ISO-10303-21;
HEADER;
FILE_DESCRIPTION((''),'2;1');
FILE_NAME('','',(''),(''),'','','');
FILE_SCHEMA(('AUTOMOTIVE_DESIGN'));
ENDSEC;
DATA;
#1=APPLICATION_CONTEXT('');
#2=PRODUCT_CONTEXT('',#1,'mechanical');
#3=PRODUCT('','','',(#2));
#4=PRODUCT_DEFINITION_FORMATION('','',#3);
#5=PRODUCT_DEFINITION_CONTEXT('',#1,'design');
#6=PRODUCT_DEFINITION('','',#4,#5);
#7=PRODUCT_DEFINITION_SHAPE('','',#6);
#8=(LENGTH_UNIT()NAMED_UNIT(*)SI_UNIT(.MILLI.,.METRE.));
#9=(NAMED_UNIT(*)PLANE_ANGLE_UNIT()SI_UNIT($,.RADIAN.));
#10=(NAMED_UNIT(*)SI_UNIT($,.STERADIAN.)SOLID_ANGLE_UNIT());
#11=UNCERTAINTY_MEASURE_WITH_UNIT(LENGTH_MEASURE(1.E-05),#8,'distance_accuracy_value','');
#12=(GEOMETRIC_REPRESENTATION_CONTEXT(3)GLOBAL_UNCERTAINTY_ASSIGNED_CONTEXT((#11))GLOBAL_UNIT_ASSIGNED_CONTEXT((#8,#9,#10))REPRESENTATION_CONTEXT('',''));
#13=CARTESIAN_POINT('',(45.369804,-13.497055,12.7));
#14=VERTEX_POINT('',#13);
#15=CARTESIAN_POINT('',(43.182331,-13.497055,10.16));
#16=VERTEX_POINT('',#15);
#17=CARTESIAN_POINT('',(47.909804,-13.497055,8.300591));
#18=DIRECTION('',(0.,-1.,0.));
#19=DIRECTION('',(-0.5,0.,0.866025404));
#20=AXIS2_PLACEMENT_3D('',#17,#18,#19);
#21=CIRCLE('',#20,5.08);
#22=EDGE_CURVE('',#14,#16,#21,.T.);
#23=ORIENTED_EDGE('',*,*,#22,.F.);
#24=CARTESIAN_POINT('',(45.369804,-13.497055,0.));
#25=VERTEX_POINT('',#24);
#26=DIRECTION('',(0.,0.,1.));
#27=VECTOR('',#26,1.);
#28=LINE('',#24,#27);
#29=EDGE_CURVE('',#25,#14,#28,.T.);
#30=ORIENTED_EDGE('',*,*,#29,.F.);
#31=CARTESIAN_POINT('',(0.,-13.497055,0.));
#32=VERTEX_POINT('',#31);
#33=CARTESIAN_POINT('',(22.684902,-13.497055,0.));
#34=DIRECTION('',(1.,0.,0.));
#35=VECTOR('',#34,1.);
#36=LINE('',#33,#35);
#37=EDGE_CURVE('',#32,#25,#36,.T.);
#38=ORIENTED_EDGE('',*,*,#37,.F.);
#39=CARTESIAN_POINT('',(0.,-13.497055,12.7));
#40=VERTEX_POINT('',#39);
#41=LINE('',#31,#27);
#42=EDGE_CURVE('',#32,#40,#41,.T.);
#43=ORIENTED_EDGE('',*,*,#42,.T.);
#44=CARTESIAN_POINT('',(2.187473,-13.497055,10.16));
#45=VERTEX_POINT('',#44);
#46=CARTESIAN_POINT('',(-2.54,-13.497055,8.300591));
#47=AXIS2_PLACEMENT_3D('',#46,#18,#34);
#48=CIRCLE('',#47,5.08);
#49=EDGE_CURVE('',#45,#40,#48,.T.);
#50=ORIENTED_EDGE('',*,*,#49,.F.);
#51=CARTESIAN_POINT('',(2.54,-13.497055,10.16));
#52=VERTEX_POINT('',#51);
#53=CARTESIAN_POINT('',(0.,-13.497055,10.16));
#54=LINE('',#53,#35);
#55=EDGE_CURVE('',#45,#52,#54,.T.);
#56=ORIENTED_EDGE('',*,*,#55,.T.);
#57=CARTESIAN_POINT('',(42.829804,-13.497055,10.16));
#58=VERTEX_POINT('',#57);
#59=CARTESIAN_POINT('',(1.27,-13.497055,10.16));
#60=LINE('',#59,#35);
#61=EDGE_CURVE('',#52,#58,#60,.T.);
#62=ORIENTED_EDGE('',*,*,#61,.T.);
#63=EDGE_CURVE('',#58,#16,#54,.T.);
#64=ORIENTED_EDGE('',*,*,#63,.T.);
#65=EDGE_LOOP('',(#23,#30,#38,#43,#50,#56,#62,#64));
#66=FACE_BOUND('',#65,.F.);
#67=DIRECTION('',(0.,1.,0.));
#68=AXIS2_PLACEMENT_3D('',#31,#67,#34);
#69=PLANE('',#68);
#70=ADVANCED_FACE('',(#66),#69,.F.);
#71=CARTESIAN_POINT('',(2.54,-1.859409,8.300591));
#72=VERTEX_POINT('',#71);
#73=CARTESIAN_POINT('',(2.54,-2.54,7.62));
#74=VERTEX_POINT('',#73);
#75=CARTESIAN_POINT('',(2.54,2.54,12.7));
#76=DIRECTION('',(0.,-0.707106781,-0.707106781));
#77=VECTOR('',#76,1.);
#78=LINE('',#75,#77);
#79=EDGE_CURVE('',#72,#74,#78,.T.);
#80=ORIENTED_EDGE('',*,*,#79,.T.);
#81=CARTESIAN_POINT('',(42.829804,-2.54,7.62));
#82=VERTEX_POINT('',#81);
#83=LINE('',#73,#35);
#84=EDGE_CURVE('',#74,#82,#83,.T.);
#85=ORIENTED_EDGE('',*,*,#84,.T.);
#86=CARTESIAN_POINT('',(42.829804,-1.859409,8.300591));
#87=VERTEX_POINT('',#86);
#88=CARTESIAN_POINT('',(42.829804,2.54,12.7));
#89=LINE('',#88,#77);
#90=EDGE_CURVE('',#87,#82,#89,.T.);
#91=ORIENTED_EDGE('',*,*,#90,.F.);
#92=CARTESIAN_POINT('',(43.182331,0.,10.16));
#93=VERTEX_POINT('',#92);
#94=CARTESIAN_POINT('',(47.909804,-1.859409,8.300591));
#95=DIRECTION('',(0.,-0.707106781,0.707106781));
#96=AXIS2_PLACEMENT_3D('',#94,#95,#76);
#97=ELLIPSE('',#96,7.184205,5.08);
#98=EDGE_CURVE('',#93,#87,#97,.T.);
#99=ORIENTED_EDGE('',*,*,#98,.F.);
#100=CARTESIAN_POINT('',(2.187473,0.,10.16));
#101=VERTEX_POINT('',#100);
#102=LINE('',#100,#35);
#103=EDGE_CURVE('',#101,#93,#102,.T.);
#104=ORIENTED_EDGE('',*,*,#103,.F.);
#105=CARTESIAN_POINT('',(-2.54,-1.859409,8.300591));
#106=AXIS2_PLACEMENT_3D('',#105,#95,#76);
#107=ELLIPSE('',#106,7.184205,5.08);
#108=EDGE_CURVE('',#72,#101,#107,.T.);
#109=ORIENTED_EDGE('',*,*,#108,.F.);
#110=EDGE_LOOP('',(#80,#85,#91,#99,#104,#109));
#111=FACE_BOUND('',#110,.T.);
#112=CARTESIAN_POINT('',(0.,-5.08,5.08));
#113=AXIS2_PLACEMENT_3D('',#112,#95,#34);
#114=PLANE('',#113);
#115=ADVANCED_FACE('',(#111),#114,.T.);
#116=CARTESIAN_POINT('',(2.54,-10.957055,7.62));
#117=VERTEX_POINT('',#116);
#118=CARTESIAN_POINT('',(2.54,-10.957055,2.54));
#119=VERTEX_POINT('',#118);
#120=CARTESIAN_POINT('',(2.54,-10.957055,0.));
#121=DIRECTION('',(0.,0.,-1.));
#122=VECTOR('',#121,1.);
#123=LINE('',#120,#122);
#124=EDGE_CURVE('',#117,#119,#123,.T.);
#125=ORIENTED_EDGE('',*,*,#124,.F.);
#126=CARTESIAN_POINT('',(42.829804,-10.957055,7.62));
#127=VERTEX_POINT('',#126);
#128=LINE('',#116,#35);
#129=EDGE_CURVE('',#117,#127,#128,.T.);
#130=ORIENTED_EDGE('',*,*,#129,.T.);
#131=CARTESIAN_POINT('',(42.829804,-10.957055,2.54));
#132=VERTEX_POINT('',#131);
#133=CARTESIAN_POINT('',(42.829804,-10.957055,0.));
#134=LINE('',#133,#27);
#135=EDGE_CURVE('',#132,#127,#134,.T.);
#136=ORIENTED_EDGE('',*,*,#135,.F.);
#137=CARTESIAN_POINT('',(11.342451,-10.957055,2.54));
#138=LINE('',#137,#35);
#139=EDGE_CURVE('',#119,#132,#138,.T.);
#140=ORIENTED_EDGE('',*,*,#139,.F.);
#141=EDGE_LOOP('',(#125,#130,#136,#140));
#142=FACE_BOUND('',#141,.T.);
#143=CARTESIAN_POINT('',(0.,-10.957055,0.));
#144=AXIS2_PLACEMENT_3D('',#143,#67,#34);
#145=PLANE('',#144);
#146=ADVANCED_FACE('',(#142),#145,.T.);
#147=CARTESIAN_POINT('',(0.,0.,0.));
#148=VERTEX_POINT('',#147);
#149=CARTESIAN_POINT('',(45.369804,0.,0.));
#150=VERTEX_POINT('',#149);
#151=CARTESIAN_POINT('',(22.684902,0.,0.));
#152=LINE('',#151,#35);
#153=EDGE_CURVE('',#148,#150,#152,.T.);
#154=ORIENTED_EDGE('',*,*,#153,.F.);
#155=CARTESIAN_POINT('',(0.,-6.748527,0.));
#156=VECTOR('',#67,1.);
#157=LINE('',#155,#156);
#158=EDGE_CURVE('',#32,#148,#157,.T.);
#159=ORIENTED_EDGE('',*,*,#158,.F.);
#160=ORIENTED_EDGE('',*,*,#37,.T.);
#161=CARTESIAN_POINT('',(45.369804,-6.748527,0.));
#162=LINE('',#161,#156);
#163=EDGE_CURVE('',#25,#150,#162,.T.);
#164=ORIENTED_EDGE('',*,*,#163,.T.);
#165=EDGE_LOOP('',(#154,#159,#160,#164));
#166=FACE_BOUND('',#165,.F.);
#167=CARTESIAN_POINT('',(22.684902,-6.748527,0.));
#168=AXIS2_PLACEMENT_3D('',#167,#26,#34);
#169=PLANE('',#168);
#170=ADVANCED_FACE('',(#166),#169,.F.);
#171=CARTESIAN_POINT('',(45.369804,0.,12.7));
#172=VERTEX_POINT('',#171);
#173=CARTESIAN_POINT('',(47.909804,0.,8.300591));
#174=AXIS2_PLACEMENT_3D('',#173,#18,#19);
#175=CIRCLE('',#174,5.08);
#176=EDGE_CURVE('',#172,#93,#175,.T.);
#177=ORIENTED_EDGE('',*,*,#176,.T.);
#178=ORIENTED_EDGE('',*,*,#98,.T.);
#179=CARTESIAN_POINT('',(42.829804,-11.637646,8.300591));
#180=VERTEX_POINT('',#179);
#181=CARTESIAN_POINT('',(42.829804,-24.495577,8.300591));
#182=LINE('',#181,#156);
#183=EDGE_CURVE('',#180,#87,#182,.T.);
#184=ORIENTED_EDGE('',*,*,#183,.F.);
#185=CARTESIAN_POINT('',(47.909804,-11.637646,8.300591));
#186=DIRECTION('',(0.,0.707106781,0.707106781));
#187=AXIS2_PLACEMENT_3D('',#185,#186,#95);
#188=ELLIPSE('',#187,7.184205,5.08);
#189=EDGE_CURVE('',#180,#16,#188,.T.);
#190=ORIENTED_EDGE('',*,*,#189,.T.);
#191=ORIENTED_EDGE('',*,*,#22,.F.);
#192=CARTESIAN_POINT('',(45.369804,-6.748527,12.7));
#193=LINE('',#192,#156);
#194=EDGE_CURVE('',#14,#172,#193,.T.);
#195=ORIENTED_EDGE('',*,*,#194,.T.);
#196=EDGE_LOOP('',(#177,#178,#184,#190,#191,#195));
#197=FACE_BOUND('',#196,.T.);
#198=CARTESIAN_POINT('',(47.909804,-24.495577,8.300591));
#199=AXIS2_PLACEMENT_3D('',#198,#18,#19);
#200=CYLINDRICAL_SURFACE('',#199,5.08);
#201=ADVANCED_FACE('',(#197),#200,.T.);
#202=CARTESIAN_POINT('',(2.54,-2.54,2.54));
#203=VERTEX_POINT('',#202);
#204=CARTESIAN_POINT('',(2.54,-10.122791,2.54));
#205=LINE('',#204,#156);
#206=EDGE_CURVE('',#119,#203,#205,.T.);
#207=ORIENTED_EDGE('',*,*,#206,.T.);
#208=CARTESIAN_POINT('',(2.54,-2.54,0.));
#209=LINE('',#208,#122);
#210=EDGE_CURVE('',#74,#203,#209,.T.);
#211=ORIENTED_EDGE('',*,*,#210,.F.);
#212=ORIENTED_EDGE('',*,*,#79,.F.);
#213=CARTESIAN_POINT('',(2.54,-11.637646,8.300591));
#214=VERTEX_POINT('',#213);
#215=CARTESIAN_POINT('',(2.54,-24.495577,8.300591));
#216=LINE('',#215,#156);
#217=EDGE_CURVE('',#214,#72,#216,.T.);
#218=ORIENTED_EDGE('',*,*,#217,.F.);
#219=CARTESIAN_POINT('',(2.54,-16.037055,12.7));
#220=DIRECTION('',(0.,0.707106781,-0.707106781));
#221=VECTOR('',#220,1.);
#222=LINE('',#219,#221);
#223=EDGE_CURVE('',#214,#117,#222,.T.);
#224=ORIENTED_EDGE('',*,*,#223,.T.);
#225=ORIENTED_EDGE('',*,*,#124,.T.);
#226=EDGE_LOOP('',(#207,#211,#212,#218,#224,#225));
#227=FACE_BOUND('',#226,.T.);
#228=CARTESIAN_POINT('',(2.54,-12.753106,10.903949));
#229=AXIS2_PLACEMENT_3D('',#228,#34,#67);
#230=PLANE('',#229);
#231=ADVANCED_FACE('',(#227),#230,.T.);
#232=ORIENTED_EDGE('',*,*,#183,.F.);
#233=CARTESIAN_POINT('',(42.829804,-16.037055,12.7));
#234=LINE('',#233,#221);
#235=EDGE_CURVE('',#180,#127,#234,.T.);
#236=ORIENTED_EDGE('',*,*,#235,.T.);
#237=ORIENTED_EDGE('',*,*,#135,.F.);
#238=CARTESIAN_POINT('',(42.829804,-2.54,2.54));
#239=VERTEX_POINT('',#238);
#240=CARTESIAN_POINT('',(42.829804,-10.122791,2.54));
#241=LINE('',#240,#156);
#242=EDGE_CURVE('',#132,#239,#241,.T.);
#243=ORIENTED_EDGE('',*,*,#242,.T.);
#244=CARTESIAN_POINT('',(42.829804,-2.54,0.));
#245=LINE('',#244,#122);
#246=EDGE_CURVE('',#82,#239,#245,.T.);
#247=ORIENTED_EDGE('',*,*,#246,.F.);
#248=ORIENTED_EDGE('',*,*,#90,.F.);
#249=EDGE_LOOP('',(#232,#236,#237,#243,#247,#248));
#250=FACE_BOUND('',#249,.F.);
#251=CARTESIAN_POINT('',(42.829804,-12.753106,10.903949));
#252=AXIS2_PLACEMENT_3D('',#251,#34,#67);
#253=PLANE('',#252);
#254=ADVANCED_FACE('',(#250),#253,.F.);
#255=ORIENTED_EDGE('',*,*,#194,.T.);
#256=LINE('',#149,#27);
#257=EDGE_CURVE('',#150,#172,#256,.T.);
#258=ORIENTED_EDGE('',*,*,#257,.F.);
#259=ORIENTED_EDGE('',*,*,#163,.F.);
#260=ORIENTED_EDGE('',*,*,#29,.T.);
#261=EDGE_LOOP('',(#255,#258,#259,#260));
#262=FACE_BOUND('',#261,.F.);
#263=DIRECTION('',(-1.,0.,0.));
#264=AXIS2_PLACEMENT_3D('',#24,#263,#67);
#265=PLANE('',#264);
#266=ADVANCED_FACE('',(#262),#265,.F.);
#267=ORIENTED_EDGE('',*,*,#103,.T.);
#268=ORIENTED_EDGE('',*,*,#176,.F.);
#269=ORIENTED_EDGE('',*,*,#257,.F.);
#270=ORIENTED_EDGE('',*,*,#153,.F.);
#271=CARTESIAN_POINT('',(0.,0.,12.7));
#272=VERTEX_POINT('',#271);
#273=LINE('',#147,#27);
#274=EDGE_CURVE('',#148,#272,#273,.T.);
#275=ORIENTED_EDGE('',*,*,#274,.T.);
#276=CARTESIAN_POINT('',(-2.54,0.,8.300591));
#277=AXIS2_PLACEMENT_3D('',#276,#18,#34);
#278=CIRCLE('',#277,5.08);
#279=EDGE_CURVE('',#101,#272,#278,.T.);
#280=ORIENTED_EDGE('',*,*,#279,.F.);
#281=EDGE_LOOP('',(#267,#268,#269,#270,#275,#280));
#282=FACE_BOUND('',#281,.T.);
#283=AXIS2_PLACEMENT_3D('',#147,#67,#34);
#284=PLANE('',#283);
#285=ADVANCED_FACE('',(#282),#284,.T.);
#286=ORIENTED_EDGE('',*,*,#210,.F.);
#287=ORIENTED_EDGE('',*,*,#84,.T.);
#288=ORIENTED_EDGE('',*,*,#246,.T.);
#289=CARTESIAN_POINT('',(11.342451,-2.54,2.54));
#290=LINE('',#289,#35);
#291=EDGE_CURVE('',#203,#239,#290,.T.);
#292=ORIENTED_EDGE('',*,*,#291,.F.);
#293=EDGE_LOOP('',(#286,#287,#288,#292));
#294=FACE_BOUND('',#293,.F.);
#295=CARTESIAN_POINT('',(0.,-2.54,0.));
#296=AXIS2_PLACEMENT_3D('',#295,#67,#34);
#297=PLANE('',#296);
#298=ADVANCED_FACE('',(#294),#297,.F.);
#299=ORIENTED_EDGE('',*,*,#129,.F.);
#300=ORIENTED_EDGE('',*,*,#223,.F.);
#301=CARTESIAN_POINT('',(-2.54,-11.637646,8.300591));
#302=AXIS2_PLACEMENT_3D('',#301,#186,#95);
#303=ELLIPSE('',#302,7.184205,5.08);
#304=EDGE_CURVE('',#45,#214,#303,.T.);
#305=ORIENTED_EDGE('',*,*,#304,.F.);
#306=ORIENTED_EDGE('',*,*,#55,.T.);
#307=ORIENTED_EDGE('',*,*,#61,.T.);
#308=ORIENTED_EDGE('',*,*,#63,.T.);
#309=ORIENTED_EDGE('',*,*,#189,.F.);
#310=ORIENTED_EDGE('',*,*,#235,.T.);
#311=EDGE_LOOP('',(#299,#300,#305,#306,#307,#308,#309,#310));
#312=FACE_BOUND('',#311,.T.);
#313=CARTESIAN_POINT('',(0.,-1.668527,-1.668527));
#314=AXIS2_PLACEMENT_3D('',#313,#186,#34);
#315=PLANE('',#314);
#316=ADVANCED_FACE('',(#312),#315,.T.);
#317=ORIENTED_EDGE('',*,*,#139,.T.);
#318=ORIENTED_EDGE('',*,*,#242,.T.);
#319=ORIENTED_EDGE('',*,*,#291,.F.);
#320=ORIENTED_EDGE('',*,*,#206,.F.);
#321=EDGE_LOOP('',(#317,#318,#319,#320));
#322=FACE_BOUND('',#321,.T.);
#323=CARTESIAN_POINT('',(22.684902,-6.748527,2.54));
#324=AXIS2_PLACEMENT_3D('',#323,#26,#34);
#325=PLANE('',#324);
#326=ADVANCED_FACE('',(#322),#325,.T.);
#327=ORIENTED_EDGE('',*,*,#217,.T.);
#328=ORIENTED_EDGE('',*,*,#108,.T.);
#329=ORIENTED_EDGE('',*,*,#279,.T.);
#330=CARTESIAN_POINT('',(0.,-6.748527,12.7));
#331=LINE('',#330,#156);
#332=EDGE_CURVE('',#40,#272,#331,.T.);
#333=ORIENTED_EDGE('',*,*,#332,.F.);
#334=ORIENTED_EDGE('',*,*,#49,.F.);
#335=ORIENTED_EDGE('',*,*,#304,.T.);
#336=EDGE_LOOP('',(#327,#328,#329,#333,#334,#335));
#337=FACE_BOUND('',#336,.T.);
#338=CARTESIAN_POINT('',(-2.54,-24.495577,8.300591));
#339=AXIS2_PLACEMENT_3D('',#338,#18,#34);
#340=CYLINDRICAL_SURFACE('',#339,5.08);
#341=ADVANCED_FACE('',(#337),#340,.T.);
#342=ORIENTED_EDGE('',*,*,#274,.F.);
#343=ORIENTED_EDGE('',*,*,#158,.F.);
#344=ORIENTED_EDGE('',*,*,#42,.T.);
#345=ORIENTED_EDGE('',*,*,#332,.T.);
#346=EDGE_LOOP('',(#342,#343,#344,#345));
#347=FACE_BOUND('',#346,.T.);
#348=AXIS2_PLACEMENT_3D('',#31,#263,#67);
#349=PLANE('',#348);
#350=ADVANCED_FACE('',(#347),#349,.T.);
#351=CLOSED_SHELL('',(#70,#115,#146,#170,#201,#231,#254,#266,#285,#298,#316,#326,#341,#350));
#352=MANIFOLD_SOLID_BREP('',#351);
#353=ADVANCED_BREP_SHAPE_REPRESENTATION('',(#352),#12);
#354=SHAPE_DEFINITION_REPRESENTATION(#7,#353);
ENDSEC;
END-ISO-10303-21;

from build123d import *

# Parameters (mm, degrees)
F0_W         = 45.3698039055
F0_H         = 13.4970545769
F1_DEPTH     = 12.7
F2_T         = -2.54
F3_T1_DEPTH  = 40.2898039055
F4_T4_DEPTH  = 35.494099833
F4_T10_DEPTH = 35.494099833


# Not quite as in the source:
# - a fillet or chamfer that OpenCascade refuses, or shapes differently, is made with other operations: its cross-section is extruded or revolved along the edge and cut away or added


with BuildPart() as f1:
    # F0 (on Top) → F1 (new body)
    with BuildSketch(Plane.XY):
        with Locations((22.6849019527, -6.7485272884)):
            Rectangle(F0_W, F0_H)
    extrude(amount=F1_DEPTH)

    # F2
    f2_openings = [f1.faces().sort_by_distance(p)[0] for p in [
        (22.684902, -6.748527, 12.7),
    ]]
    offset(amount=F2_T, openings=f2_openings)

    # F3: chamfer of 5.08 on 2 edges, made by hand

    # F3_s2 → F3_t1 (cut)
    with BuildSketch(Plane.YZ.offset(2.54)):
        Polygon((-16.0370545769, 12.7), (-10.9570545769, 7.62), (-10.9570545769, 12.7), align=None)
        Polygon((2.54, 12.7), (-2.54, 7.62), (-2.54, 12.7), align=None)
    extrude(amount=F3_T1_DEPTH, mode=Mode.SUBTRACT)

    # F4: fillet of radius 5.08 on 2 edges, made by hand


with BuildPart() as f4_tool2:
    # F4_s3 → F4_t4 (new body)
    with BuildSketch(Plane.XZ.offset(24.4955772049)):
        with BuildLine():
            ThreePointArc((45.3698039055, 12.7), (43.5103948543, 10.8405909488), (42.8298039055, 8.3005909488))
            Line((42.8298039055, 8.3005909488), (42.8298039055, 12.7))
            Line((42.8298039055, 12.7), (45.3698039055, 12.7))
        make_face()
    extrude(amount=-F4_T4_DEPTH)

    split(bisect_by=Plane(origin=(0, -1.6685272884, -1.6685272884), x_dir=(1, 0, 0), z_dir=(0, 0.7071067812, 0.7071067812)), keep=Keep.TOP)

    split(bisect_by=Plane(origin=(0, -5.08, 5.08), x_dir=(1, 0, 0), z_dir=(0, -0.7071067812, 0.7071067812)), keep=Keep.TOP)


with BuildPart() as f1_1:
    add(f1.part)

    # F4_t1: cut F4_tool2
    add(f4_tool2.part, mode=Mode.SUBTRACT)


with BuildPart() as f4_tool8:
    # F4_s9 → F4_t10 (new body)
    with BuildSketch(Plane.XZ.offset(24.4955772049)):
        with BuildLine():
            ThreePointArc((2.54, 8.3005909488), (1.8594090512, 10.8405909488), (0, 12.7))
            Line((0, 12.7), (2.54, 12.7))
            Line((2.54, 12.7), (2.54, 8.3005909488))
        make_face()
    extrude(amount=-F4_T10_DEPTH)

    split(bisect_by=Plane(origin=(0, -1.6685272884, -1.6685272884), x_dir=(1, 0, 0), z_dir=(0, 0.7071067812, 0.7071067812)), keep=Keep.TOP)

    split(bisect_by=Plane(origin=(0, -5.08, 5.08), x_dir=(1, 0, 0), z_dir=(0, -0.7071067812, 0.7071067812)), keep=Keep.TOP)


with BuildPart() as f1_2:
    add(f1_1.part)

    # F4_t7: cut F4_tool8
    add(f4_tool8.part, mode=Mode.SUBTRACT)


solid = f1_2.part
